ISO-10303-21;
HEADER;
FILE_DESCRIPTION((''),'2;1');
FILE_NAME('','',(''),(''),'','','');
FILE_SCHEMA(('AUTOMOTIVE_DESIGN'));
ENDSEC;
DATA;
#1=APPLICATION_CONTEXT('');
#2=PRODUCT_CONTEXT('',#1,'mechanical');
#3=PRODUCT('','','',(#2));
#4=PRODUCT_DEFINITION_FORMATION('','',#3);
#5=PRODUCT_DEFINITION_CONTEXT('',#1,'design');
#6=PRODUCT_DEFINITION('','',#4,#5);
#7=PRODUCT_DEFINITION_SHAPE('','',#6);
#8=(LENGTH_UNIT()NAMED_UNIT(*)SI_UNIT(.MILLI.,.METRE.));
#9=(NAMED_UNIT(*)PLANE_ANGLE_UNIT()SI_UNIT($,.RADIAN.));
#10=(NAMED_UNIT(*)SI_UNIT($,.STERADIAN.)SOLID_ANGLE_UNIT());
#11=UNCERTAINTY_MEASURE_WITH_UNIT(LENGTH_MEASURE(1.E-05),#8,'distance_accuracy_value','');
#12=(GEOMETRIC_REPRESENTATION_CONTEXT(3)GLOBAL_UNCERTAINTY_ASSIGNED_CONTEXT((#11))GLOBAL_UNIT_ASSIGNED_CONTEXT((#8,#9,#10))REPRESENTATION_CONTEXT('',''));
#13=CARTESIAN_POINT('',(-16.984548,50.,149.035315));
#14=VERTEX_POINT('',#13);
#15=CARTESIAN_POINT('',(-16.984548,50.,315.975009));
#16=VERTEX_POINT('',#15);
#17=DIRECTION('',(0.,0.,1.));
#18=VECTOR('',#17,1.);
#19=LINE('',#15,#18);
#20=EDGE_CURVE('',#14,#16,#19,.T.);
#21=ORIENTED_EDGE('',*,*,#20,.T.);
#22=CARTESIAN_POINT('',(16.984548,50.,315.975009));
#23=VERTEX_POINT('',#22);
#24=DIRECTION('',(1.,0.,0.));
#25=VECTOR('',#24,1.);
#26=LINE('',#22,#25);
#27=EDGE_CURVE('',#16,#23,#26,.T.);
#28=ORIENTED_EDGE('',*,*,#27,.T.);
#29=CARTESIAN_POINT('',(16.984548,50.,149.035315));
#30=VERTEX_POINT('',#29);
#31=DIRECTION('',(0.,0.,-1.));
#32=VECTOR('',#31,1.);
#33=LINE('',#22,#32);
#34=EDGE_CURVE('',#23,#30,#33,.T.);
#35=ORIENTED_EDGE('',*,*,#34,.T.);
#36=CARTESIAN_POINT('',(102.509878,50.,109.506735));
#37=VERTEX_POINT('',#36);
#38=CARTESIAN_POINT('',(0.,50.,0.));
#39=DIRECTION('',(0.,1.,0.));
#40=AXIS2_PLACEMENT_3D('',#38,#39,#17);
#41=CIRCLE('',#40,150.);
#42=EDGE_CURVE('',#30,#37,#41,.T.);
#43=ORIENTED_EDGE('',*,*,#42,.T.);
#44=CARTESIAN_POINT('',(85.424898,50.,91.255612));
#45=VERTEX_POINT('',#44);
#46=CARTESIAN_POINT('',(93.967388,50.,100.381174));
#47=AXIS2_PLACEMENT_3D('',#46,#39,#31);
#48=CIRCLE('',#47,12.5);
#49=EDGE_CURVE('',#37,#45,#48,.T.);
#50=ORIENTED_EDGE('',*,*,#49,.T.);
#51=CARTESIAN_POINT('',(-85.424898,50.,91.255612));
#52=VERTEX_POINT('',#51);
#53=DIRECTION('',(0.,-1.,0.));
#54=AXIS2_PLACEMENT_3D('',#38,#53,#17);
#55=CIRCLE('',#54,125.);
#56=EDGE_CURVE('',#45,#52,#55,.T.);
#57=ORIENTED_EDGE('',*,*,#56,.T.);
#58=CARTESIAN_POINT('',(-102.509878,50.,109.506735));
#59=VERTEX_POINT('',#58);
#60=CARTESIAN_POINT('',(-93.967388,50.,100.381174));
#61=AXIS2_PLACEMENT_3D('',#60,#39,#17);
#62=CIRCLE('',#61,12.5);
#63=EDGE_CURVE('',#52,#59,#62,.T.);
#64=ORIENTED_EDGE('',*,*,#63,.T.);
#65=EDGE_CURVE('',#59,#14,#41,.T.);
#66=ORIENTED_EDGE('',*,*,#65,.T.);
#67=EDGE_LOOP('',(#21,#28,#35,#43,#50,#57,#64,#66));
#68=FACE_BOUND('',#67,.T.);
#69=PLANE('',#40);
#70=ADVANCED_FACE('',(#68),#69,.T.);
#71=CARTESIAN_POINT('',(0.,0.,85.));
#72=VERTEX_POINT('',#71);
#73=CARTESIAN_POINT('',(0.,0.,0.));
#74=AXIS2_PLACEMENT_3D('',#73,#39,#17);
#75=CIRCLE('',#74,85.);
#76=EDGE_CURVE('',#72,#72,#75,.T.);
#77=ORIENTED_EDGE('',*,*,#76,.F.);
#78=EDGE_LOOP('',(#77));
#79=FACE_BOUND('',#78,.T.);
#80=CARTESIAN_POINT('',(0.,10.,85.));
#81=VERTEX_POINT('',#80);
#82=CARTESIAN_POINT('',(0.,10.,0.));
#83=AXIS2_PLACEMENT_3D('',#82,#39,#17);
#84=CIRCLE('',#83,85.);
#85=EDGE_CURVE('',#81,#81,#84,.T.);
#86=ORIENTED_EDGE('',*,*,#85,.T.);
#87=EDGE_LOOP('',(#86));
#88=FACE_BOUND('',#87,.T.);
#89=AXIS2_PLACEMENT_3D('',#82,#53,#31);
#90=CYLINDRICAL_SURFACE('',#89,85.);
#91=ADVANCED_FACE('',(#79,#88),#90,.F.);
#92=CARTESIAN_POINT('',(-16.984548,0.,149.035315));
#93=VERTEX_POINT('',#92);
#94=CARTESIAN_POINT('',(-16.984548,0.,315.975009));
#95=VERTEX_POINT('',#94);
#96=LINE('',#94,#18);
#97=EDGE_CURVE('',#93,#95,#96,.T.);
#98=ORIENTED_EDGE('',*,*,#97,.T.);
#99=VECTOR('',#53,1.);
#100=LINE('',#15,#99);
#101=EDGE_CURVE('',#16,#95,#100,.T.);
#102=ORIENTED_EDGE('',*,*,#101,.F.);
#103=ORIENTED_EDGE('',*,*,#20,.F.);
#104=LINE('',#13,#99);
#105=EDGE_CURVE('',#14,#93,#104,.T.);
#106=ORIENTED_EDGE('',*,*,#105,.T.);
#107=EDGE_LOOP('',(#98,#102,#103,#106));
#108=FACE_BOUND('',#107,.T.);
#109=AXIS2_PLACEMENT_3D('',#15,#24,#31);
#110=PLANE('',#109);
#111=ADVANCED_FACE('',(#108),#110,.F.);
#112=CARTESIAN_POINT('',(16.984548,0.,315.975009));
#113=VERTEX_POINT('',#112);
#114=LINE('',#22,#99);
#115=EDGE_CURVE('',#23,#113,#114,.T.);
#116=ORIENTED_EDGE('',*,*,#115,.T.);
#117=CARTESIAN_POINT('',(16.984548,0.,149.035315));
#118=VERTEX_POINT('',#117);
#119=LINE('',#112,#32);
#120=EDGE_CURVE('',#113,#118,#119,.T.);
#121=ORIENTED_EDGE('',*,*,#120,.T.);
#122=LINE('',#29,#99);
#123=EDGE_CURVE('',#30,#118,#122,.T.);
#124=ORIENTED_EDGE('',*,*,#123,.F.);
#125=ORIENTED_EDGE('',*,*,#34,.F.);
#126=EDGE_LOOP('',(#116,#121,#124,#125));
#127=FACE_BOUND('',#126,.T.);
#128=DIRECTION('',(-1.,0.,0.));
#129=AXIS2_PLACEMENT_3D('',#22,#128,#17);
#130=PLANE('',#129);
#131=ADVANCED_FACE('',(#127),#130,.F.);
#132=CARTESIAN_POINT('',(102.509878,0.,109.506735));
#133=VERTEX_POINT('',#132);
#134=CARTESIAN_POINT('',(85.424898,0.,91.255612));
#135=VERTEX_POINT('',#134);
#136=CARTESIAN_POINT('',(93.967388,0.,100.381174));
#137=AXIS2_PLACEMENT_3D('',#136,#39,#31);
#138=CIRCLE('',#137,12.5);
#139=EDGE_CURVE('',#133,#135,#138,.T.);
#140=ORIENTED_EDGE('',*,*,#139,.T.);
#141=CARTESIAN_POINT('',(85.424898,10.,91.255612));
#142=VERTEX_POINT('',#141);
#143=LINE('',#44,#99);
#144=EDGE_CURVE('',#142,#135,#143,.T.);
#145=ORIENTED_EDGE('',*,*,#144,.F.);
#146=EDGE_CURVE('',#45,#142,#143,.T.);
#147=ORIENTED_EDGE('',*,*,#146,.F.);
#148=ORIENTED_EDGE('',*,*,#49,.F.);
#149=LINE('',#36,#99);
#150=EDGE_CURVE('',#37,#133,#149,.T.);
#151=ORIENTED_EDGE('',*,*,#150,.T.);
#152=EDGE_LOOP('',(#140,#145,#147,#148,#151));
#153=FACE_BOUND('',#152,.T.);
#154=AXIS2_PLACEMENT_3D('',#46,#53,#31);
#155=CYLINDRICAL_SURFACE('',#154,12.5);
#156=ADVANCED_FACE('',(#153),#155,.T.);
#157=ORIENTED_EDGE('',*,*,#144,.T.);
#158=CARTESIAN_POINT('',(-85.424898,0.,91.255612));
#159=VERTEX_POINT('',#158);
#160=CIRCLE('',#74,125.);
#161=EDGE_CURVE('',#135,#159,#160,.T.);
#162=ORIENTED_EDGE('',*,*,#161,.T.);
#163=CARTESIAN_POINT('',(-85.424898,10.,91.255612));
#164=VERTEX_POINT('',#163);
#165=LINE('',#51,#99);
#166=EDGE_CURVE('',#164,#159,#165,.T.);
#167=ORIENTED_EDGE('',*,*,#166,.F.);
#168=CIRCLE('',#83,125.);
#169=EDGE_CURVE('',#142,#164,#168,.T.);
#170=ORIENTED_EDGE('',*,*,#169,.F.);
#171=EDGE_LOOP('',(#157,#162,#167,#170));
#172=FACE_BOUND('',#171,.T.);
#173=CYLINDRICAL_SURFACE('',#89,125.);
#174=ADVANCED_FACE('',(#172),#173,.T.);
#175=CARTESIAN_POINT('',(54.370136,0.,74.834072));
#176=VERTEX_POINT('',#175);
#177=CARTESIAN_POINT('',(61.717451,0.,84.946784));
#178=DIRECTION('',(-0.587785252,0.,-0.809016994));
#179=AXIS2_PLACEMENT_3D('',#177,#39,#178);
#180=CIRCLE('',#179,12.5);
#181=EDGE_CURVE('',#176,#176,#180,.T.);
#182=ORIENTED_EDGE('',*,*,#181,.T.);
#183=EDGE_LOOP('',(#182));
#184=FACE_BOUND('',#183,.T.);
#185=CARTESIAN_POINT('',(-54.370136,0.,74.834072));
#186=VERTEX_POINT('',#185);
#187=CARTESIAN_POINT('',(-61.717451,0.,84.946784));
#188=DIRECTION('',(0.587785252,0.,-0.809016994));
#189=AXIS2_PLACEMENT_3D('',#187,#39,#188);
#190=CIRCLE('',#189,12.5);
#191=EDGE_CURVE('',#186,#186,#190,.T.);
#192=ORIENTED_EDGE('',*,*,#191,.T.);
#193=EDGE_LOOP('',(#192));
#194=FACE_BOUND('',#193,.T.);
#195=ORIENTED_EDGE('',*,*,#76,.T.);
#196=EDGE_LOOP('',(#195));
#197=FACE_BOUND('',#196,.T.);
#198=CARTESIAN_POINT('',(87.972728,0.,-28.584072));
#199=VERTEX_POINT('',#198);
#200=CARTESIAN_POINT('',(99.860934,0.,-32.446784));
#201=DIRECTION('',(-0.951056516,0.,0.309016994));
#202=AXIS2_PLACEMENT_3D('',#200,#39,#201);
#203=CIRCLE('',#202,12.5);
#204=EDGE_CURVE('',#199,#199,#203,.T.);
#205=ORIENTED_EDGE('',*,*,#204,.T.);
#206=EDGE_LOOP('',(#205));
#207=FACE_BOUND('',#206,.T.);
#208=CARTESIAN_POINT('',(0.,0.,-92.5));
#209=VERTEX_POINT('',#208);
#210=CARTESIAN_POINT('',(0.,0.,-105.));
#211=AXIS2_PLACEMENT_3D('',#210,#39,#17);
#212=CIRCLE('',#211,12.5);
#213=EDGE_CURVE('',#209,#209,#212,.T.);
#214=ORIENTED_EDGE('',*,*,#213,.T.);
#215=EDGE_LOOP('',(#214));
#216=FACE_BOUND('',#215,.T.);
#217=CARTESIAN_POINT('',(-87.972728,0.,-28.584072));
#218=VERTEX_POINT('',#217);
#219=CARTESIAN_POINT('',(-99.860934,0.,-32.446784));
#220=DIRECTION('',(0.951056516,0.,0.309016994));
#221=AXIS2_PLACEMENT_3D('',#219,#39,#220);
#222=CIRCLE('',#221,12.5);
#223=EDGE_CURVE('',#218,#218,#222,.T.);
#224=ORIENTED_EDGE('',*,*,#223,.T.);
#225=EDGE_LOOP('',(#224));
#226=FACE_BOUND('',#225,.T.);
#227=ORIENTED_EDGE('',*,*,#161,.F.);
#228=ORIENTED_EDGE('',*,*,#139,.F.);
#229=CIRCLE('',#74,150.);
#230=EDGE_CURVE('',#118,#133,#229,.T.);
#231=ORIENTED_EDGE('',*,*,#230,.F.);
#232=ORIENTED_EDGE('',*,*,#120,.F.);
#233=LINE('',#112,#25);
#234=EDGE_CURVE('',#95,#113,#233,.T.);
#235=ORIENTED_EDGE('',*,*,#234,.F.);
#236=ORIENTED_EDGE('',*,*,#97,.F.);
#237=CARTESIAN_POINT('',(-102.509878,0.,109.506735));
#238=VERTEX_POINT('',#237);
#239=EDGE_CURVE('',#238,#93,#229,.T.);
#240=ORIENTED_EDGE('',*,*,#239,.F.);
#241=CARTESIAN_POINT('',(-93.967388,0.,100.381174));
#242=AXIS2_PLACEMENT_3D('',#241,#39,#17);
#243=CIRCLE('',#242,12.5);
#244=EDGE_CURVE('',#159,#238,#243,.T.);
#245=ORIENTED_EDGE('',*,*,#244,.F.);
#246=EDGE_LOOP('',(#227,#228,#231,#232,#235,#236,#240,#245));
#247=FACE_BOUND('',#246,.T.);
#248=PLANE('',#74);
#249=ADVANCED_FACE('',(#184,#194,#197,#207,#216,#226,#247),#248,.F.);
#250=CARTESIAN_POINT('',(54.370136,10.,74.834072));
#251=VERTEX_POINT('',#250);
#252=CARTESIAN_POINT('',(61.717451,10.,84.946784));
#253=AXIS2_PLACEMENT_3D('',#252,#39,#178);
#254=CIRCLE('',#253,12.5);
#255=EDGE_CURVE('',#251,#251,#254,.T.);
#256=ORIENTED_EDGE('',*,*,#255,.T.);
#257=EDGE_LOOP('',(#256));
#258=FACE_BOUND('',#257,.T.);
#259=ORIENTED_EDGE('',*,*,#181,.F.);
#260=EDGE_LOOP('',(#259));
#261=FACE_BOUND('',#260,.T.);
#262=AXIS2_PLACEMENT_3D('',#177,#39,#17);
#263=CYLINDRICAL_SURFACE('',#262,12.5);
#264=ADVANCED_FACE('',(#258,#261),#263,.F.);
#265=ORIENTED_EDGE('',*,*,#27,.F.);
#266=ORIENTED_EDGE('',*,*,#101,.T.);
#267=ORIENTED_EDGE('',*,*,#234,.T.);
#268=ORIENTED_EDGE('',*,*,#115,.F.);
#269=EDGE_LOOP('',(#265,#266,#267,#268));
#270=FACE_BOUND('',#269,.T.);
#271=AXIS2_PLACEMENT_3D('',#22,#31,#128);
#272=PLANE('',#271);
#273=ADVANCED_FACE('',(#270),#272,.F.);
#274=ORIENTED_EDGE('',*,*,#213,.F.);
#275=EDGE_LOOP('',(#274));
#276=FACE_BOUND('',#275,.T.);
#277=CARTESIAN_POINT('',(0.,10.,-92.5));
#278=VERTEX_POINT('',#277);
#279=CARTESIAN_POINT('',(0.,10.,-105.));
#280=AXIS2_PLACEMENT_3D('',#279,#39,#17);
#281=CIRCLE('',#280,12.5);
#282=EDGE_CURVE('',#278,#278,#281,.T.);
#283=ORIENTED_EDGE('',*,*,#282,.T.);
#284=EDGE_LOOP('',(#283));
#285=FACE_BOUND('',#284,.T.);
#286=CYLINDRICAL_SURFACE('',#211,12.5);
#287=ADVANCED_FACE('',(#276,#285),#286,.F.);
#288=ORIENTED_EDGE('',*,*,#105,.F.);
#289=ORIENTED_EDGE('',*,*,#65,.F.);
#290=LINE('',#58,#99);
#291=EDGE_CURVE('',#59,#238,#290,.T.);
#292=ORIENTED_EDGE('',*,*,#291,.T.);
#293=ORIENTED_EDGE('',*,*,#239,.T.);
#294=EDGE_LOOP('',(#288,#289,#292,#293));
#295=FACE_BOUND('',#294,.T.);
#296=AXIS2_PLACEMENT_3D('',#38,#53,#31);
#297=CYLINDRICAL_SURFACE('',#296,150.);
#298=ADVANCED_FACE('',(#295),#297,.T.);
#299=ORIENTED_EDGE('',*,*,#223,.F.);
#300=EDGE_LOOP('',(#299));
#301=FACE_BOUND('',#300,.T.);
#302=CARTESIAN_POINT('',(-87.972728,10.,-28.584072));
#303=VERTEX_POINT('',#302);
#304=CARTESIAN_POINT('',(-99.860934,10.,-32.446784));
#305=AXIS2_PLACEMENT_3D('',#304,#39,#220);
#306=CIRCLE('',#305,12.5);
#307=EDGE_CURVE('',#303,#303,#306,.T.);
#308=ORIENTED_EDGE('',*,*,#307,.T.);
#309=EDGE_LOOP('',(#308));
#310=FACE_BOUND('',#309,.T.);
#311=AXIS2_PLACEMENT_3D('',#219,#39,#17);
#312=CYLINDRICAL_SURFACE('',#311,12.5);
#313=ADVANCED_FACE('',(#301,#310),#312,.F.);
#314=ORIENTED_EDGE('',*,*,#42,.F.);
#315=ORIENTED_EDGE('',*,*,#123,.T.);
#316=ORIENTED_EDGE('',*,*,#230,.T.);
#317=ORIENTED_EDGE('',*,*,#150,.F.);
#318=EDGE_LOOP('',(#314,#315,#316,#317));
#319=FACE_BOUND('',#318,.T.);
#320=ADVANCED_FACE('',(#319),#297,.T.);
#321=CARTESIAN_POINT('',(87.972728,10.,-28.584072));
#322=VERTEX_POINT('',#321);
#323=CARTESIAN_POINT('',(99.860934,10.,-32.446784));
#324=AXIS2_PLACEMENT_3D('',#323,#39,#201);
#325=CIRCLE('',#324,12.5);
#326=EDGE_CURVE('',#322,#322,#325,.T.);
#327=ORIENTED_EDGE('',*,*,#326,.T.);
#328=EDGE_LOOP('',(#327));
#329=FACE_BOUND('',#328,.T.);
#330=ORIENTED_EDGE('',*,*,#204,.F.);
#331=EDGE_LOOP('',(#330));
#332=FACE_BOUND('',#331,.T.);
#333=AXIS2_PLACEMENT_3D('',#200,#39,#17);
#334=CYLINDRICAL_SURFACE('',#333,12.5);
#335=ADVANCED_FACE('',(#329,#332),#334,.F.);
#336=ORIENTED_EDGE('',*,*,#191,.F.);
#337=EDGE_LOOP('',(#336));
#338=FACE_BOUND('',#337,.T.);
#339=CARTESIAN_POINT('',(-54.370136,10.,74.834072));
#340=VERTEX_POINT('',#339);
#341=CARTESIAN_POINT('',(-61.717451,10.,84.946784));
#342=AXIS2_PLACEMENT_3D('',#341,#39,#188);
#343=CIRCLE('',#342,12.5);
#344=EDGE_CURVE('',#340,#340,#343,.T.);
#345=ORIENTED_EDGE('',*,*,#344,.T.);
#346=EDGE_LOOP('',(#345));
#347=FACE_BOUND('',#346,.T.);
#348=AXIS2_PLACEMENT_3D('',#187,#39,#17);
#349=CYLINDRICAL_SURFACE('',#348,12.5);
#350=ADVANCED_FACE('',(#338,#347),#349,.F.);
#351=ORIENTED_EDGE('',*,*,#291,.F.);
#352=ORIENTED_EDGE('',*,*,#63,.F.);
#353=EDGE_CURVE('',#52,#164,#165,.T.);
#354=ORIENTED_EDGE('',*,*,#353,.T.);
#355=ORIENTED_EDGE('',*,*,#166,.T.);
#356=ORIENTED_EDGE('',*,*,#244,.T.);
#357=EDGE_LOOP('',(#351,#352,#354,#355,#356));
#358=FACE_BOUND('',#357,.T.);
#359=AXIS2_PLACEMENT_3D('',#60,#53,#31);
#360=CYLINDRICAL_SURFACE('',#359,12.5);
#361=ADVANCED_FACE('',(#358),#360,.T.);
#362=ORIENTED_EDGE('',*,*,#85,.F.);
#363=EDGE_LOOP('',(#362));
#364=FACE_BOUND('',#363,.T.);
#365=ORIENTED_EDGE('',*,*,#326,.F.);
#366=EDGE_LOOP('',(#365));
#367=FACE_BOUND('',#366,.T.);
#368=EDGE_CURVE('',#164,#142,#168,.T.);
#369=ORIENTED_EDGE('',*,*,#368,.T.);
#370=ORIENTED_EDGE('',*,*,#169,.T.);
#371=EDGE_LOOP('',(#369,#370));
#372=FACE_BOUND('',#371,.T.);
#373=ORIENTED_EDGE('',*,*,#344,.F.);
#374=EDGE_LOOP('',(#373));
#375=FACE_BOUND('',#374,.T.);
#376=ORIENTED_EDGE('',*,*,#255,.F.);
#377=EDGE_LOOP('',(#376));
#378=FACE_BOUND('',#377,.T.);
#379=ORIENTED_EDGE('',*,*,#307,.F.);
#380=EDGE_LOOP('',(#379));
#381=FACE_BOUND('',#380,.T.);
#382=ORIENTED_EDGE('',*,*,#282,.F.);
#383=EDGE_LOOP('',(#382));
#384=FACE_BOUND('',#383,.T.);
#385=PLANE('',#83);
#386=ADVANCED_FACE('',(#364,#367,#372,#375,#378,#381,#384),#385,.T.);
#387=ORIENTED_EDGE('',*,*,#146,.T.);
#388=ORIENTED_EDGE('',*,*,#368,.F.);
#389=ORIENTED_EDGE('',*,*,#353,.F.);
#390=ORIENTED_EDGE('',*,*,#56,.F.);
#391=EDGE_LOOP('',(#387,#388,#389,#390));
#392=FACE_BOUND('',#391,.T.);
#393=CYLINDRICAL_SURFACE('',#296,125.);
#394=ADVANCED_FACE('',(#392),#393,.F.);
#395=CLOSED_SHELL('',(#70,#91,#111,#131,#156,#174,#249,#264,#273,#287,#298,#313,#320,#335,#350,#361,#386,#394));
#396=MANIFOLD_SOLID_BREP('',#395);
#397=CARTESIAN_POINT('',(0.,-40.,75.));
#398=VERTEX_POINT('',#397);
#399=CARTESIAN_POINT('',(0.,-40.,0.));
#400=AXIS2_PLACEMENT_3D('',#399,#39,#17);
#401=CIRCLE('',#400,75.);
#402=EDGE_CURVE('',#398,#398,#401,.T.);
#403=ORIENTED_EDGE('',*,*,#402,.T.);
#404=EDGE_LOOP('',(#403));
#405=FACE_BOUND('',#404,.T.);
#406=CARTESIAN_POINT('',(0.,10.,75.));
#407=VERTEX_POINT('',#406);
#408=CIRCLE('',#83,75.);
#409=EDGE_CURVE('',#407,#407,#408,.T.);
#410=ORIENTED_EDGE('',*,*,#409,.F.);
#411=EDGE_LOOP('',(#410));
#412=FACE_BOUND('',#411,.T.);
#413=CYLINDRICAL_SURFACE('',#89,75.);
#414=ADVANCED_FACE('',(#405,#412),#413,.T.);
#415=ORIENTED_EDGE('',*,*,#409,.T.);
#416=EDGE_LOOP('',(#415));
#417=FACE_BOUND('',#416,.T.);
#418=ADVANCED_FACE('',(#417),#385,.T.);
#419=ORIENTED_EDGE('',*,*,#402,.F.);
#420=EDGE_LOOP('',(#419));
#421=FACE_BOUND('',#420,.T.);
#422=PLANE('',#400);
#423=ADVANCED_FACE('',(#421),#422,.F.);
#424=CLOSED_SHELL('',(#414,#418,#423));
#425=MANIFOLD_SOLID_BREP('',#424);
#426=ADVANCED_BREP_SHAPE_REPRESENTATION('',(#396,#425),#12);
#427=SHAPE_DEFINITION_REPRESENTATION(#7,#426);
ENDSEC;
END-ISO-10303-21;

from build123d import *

# Parameters (mm, degrees)
SKETCH1_R           = 125
SKETCH1_R_2         = 85
BOSS_EXTRUDE1_DEPTH = 10
SKETCH2_R           = 12.5
CUT_EXTRUDE1_DEPTH  = 178.059312096
CIRPATTERN1_COUNT   = 5
SKETCH3_R           = 75
BOSS_EXTRUDE2_DEPTH = 50
BOSS_EXTRUDE3_DEPTH = 50


with BuildPart() as part:
    # Sketch1 → Boss-Extrude1 (new body)
    with BuildSketch(Plane(origin=(0, 0, 0), x_dir=(1, 0, 0), z_dir=(0, 1, 0))):
        with Locations(Location((0, 0, 0), (0, 0, 270))):
            Circle(SKETCH1_R)
        with Locations(Location((0, 0, 0), (0, 0, 270))):
            Circle(SKETCH1_R_2, mode=Mode.SUBTRACT)
    extrude(amount=BOSS_EXTRUDE1_DEPTH)

    # Sketch2 → Cut-Extrude1 (cut, through all)
    with BuildSketch(Plane(origin=(0, 10, 0), x_dir=(1, 0, 0), z_dir=(0, 1, 0))):
        with Locations(Location((0, 105, 0), (0, 0, 270))):
            Circle(SKETCH2_R)
    cut_extrude1 = extrude(amount=-CUT_EXTRUDE1_DEPTH, mode=Mode.SUBTRACT)

    # CirPattern1: Cut-Extrude1 ×5 about axis
    cirpattern1_axis = Axis((0, 0, 0), (0, 1, 0))
    for i in range(1, CIRPATTERN1_COUNT):
        add(cut_extrude1.rotate(cirpattern1_axis, i * 360 / CIRPATTERN1_COUNT), mode=Mode.SUBTRACT)


with BuildPart() as body_2:
    # Sketch3 → Boss-Extrude2 (new body)
    with BuildSketch(Plane(origin=(0, 200, 0), x_dir=(1, 0, 0), z_dir=(0, 1, 0))):
        with Locations(Location((-851.544942269, -20.84567913, 0), (0, 0, 270))):
            Circle(SKETCH3_R)
    extrude(amount=BOSS_EXTRUDE2_DEPTH)


with BuildPart() as body_2_1:
    # Body-Move/Copy1: read off the stored shape, not the designer's step
    # Body-Move/Copy1: moved
    add(body_2.part.moved(Location((851.5449423, -240, -20.8456791))))


with BuildPart() as body_3:
    # Sketch4 → Boss-Extrude3 (new body)
    with BuildSketch(Plane(origin=(0, 0, 0), x_dir=(1, 0, 0), z_dir=(0, 1, 0))):
        with BuildLine():
            Line((16.984547595, -546.986245961), (-16.984547595, -546.986245961))
            Line((-16.984547595, -546.986245961), (-16.984547595, -380.04655235))
            ThreePointArc((-16.984547595, -380.04655235), (-62.931363961, -367.171596509), (-102.50987753, -340.517972257))
            ThreePointArc((-102.50987753, -340.517972257), (-103.092948985, -322.849921213), (-85.424897941, -322.266849758))
            ThreePointArc((-85.424897941, -322.266849758), (0, -356.011237263), (85.424897941, -322.266849758))
            ThreePointArc((85.424897941, -322.266849758), (103.092948985, -322.849921213), (102.50987753, -340.517972257))
            ThreePointArc((102.50987753, -340.517972257), (62.931363961, -367.171596509), (16.984547595, -380.04655235))
            Line((16.984547595, -380.04655235), (16.984547595, -546.986245961))
        make_face()
    extrude(amount=BOSS_EXTRUDE3_DEPTH)


with BuildPart() as body_3_1:
    # Body-Move/Copy2: read off the stored shape, not the designer's step
    # Body-Move/Copy2: moved
    add(body_3.part.moved(Location((0, 0, -231.0112373))))

    # Combine2: union part
    add(part.part)


solid = Compound([body_2_1.part, body_3_1.part])
